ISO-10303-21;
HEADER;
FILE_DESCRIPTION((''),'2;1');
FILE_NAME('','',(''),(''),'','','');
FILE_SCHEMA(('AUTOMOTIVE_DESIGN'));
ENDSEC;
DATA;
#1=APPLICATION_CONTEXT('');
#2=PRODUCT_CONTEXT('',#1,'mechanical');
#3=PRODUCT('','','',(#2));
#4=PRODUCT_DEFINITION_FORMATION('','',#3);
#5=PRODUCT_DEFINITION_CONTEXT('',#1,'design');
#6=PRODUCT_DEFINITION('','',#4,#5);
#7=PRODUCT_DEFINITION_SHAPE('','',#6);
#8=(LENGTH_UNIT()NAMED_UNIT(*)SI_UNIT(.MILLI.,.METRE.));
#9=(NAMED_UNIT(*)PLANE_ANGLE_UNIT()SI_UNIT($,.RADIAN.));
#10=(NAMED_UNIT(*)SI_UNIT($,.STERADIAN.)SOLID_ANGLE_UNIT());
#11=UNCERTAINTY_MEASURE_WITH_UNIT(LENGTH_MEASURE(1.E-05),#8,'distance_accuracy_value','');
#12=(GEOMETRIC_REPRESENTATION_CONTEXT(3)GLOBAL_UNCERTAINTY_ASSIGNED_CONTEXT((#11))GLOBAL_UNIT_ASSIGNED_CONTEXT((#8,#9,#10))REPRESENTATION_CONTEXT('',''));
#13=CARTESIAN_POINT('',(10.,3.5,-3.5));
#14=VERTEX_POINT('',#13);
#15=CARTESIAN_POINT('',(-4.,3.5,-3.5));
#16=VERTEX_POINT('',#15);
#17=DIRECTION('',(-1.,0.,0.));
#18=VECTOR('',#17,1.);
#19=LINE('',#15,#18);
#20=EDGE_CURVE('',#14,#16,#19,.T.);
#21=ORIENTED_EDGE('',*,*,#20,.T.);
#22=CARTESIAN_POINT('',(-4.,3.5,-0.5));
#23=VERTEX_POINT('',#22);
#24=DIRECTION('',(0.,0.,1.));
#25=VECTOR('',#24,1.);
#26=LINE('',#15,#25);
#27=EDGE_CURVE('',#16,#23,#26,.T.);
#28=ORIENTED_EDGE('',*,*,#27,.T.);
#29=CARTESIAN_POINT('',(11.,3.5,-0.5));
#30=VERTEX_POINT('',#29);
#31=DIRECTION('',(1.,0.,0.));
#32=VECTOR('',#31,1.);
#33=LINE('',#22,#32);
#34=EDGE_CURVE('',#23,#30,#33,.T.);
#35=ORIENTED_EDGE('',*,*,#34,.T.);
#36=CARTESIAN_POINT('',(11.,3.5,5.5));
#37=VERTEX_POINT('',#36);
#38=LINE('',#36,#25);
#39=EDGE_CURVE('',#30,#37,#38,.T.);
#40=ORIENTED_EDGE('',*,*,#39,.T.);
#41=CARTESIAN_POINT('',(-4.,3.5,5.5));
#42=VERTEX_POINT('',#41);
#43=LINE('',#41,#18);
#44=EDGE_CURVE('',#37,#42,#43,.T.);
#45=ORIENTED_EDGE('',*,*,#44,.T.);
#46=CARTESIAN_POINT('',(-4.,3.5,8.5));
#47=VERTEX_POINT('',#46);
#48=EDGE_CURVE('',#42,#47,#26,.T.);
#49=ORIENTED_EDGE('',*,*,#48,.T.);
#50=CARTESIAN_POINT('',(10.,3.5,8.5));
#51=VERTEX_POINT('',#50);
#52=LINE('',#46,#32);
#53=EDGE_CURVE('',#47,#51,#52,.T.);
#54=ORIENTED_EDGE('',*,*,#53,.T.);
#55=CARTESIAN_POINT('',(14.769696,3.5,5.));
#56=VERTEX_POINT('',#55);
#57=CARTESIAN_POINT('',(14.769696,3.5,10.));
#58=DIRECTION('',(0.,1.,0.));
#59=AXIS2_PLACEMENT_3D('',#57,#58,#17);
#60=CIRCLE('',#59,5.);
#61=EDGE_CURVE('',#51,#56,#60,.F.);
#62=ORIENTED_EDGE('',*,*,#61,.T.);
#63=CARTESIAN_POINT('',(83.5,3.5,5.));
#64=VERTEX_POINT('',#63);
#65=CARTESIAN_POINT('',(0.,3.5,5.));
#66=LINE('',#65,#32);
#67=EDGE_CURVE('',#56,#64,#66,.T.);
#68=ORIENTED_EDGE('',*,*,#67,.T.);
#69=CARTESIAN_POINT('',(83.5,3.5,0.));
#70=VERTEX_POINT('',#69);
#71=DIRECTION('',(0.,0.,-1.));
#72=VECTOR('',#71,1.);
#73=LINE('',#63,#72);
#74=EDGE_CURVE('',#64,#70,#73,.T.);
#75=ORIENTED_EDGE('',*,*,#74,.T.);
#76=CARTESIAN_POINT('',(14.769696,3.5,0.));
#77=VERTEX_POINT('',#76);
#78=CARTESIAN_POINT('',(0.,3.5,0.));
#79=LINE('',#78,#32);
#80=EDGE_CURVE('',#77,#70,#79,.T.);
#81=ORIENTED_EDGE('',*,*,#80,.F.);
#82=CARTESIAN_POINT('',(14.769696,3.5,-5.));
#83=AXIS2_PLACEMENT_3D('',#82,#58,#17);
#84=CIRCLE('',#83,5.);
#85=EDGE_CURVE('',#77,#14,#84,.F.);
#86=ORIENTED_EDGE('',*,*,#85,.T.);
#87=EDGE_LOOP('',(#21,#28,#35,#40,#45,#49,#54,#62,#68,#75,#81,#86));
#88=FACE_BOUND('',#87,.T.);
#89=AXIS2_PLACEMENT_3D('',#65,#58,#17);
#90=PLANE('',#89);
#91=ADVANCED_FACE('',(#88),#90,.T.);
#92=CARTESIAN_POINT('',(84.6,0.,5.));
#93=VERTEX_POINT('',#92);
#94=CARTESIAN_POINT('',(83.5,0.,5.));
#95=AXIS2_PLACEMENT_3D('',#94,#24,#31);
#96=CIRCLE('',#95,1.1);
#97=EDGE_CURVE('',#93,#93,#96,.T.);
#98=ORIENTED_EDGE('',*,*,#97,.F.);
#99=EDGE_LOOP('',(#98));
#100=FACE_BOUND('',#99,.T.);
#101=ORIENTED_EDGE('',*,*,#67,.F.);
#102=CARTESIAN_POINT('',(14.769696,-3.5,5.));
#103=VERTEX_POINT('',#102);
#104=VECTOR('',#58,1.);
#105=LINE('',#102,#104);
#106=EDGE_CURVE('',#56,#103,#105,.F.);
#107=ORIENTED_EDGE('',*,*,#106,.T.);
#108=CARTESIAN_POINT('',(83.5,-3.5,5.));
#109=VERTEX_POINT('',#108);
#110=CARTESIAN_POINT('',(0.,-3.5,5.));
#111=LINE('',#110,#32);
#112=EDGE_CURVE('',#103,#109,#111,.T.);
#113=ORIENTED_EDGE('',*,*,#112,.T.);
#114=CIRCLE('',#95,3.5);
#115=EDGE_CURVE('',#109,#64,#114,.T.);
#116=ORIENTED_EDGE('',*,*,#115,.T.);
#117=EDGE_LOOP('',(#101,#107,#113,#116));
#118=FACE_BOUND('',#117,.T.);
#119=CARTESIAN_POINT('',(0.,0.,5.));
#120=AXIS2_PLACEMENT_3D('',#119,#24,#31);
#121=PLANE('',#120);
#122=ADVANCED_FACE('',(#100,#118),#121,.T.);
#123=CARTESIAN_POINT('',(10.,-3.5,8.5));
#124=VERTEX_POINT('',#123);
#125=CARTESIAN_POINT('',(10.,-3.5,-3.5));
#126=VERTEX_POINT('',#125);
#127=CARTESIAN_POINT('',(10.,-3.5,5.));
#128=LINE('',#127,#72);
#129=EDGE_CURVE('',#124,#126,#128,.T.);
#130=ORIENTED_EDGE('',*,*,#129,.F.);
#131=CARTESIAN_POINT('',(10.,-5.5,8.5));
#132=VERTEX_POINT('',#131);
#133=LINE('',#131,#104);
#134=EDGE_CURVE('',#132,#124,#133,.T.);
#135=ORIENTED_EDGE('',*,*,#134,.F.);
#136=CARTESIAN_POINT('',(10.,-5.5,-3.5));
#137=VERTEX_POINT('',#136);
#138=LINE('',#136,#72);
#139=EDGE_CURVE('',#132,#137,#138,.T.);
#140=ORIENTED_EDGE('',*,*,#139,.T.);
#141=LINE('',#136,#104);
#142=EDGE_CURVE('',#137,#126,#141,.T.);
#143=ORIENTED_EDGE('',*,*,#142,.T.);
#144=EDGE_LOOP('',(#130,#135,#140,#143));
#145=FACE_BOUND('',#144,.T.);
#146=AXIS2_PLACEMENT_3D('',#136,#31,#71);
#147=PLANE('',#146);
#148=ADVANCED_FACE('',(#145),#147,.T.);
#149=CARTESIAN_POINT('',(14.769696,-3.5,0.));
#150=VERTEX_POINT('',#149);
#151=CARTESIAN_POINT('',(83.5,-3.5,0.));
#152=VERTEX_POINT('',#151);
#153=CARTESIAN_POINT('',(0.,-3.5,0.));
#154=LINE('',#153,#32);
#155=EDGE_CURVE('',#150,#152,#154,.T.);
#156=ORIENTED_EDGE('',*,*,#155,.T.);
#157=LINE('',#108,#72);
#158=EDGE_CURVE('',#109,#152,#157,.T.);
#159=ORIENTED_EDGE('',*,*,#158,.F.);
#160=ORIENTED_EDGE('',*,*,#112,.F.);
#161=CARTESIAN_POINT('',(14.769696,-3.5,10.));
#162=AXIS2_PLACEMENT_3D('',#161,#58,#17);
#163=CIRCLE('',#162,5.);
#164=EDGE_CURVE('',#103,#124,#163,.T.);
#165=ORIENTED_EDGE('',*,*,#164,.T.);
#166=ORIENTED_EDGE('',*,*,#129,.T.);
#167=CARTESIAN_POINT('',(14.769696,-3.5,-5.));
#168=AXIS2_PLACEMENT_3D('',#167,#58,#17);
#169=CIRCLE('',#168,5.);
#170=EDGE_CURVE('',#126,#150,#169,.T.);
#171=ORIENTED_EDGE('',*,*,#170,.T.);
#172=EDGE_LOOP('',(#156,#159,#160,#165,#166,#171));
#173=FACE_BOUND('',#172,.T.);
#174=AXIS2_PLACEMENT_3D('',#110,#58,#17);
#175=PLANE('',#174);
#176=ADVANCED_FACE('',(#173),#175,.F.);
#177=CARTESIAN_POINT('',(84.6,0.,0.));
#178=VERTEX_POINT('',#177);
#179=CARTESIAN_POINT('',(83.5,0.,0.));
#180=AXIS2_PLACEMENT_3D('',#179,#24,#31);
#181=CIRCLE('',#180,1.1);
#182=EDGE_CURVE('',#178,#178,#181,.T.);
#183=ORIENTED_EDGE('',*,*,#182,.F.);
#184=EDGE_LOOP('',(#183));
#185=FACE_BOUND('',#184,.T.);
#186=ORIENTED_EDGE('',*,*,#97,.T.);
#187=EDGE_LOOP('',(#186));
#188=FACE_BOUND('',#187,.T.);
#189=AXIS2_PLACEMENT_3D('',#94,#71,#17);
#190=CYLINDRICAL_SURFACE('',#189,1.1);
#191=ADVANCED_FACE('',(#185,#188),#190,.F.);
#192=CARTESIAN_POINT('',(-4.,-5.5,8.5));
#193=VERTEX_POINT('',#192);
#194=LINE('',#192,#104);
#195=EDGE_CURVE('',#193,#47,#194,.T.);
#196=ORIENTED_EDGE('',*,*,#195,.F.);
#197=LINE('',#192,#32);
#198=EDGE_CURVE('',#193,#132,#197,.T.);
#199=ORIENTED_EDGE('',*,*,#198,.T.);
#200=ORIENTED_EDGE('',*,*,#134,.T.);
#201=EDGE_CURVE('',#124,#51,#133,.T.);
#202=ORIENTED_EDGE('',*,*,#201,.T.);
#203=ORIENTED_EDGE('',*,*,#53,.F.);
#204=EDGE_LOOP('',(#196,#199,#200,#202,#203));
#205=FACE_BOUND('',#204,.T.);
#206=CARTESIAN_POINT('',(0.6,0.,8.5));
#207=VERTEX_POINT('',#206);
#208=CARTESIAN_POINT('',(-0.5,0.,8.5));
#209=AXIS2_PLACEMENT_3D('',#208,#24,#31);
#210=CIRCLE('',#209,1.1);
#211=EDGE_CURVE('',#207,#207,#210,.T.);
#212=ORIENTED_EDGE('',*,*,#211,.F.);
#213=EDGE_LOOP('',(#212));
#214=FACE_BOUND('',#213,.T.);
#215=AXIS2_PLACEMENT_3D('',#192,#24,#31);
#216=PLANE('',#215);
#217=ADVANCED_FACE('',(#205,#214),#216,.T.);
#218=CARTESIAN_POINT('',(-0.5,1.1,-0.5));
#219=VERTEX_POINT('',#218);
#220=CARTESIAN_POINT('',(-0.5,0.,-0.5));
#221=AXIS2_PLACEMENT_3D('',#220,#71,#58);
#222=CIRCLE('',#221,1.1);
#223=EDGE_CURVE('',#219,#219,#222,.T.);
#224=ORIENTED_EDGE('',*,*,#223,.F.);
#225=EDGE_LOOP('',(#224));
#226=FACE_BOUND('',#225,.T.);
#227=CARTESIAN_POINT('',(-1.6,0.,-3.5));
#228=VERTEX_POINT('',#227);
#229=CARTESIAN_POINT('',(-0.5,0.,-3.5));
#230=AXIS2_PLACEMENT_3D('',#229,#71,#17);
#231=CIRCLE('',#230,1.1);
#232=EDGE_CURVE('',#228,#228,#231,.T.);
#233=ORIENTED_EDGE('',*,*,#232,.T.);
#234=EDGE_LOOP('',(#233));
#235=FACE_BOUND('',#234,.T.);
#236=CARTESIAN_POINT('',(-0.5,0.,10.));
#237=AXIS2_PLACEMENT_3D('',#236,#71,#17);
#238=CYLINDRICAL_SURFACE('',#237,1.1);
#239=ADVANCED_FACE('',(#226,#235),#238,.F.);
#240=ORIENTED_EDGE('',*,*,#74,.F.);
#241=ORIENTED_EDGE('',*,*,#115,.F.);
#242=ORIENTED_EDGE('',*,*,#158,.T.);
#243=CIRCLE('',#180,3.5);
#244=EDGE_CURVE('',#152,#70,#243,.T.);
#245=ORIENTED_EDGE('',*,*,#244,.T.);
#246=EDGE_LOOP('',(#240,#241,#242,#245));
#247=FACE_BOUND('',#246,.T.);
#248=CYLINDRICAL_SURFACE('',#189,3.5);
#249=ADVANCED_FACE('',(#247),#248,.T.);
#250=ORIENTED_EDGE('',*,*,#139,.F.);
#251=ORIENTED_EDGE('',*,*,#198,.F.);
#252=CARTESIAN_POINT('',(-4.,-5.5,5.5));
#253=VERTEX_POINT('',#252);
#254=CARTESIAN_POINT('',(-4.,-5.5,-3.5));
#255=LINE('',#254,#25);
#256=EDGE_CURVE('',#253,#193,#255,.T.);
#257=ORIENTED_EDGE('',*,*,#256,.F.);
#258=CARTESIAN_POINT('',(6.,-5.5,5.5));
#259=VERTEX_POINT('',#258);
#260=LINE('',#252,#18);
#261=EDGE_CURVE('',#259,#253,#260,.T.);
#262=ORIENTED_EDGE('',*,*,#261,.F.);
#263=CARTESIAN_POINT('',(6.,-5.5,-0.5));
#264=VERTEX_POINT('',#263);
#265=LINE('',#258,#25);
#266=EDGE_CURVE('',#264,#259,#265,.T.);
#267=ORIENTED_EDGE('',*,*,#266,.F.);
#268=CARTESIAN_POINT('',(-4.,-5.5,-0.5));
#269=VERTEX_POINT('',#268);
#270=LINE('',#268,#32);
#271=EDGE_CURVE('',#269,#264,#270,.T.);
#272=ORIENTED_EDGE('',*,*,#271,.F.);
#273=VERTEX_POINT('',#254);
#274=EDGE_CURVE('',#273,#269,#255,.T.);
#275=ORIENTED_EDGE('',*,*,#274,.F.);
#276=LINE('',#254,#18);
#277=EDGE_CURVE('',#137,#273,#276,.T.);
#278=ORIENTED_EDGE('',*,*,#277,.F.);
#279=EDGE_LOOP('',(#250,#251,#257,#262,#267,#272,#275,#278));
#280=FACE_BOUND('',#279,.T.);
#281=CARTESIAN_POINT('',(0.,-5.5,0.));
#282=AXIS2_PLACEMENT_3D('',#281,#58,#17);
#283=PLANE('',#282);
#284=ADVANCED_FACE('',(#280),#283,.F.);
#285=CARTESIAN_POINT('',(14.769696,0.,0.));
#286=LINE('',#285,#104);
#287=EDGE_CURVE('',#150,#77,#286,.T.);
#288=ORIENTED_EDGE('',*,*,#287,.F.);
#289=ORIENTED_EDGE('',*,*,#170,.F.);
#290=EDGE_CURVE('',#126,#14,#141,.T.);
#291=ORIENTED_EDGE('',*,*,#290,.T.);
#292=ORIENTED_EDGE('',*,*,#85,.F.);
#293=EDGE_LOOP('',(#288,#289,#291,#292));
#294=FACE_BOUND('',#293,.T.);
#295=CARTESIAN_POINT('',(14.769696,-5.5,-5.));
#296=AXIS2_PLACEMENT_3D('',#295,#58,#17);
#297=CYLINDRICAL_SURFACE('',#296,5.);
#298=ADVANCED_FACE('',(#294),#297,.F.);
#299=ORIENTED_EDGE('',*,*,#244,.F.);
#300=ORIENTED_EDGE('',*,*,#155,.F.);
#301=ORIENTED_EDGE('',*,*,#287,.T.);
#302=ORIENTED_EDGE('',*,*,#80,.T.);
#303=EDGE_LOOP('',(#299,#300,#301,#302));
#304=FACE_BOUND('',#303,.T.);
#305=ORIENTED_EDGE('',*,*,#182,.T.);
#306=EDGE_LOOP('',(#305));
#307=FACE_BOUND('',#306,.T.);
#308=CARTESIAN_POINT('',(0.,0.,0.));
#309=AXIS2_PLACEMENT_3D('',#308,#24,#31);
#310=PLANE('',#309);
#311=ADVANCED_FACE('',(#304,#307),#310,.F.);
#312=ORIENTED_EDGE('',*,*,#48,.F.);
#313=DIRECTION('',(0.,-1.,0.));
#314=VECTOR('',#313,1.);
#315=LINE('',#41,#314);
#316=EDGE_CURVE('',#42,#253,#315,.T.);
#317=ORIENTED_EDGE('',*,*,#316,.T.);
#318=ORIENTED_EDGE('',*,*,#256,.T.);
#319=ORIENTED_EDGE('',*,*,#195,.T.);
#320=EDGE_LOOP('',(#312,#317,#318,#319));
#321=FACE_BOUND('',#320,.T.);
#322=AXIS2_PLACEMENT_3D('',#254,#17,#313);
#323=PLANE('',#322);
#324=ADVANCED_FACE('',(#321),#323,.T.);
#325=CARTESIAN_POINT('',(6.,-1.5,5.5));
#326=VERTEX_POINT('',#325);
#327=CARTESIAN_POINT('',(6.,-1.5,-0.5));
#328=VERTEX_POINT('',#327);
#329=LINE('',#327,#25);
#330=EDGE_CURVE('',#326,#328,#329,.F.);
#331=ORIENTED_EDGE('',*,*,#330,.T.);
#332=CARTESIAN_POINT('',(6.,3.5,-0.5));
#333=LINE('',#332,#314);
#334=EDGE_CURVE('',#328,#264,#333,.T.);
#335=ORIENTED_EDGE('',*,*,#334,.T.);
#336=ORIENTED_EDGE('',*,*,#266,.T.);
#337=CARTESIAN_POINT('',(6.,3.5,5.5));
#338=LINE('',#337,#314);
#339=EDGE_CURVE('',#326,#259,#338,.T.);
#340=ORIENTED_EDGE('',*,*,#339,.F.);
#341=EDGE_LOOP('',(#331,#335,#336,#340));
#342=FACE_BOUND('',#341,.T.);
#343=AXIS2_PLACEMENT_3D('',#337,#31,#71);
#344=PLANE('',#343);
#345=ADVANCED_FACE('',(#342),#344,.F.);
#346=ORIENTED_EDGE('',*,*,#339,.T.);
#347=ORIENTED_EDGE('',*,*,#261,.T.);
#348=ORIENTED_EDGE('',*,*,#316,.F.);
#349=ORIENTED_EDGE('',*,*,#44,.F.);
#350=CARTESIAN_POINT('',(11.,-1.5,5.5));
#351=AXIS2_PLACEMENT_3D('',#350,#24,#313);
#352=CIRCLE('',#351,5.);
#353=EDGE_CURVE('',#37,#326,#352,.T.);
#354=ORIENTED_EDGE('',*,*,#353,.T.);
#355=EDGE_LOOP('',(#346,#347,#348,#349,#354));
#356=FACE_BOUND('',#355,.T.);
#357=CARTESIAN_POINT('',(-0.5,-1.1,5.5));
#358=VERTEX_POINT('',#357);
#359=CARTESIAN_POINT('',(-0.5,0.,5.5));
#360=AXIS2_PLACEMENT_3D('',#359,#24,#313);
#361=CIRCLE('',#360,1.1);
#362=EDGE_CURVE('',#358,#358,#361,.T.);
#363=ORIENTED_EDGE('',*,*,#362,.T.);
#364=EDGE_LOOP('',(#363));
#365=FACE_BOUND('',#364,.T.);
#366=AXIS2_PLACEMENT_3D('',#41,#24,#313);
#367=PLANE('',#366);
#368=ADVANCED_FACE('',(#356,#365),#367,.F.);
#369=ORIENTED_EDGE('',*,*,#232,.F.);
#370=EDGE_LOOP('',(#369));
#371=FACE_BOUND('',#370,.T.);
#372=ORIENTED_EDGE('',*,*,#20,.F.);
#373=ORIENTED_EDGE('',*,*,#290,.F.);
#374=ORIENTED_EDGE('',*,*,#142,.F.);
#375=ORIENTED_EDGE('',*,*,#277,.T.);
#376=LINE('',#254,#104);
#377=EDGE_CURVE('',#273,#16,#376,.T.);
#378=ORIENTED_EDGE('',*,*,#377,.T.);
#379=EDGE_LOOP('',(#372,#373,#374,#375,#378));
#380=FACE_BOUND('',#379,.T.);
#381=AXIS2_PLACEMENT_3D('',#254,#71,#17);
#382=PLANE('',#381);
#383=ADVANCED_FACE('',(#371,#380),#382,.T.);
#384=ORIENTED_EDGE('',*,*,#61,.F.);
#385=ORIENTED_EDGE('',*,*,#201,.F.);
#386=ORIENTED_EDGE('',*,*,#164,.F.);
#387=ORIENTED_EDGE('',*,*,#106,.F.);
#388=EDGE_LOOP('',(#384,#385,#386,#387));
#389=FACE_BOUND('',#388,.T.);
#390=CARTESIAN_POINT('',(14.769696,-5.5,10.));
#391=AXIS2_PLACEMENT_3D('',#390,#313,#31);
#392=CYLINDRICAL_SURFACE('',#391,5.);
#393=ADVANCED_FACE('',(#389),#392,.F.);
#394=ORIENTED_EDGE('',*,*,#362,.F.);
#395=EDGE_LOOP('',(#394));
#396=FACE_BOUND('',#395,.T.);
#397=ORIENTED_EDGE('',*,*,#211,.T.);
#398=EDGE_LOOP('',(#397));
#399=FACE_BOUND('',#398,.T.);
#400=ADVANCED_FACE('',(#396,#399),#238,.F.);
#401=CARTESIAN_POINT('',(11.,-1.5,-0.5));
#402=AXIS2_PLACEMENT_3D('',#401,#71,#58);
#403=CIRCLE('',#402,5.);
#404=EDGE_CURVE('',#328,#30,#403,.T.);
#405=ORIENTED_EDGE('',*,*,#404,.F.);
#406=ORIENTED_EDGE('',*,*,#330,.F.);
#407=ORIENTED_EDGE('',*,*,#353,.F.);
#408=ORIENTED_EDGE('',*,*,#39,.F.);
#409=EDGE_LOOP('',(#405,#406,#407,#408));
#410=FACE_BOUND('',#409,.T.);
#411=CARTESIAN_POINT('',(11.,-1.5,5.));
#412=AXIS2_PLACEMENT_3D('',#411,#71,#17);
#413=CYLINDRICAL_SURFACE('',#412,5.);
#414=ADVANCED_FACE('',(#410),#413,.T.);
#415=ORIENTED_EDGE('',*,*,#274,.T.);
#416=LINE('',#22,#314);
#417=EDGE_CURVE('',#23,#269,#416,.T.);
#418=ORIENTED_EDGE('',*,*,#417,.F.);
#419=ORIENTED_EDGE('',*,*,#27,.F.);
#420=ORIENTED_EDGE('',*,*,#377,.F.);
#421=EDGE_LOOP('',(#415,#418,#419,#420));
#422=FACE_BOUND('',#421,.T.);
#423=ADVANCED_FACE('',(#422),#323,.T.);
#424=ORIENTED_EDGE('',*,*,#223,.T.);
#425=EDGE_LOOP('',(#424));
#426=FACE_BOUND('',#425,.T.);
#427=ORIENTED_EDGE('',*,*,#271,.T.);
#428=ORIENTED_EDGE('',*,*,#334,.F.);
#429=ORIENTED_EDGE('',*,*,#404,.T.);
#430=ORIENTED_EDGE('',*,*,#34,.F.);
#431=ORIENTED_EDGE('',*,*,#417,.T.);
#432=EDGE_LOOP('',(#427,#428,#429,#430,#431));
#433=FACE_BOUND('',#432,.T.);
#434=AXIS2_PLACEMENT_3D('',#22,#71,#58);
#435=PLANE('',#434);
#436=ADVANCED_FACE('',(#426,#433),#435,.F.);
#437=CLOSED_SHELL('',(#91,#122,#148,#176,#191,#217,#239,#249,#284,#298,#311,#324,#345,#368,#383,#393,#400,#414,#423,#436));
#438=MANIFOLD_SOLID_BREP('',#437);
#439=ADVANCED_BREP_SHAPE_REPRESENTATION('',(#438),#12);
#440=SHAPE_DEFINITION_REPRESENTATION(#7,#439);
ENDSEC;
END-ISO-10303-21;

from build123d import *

# Parameters (mm, degrees)
SKETCH1_R           = 1.1
BOSS_EXTRUDE1_DEPTH = 5
SKETCH4_W           = 14
SKETCH4_H           = 12
BOSS_EXTRUDE3_DEPTH = 9
SKETCH5_W           = 10
SKETCH5_H           = 6
CUT_EXTRUDE2_DEPTH  = 9
CUT_EXTRUDE3_START  = 5
SKETCH7_R           = 1.1
CUT_EXTRUDE3_DEPTH  = 15
FILLET1_R           = 5
FILLET2_R           = 5


with BuildPart() as part:
    # Sketch1 → Boss-Extrude1 (new body)
    with BuildSketch(Plane.XY):
        with BuildLine():
            ThreePointArc((0, 3.5), (-3.5, 0), (0, -3.5))
            Line((0, -3.5), (83.5, -3.5))
            ThreePointArc((83.5, -3.5), (87, 0), (83.5, 3.5))
            Line((83.5, 3.5), (0, 3.5))
        make_face()
        Circle(SKETCH1_R, mode=Mode.SUBTRACT)
        with Locations((83.5, 0)):
            Circle(SKETCH1_R, mode=Mode.SUBTRACT)
    extrude(amount=BOSS_EXTRUDE1_DEPTH)

    # Sketch4 → Boss-Extrude3 (add)
    with BuildSketch(Plane(origin=(0, 3.5, 0), x_dir=(1, 0, 0), z_dir=(0, 1, 0))):
        with Locations((3, -2.5)):
            Rectangle(SKETCH4_W, SKETCH4_H)
    extrude(amount=-BOSS_EXTRUDE3_DEPTH)

    # Sketch5 → Cut-Extrude2 (cut)
    with BuildSketch(Plane.XZ.offset(5.5)):
        with Locations((1, 2.5)):
            Rectangle(SKETCH5_W, SKETCH5_H)
    extrude(amount=-CUT_EXTRUDE2_DEPTH, mode=Mode.SUBTRACT)

    # Sketch7 → Cut-Extrude3 (cut)
    with BuildSketch(Plane(origin=(0, 0, 0), x_dir=(-1, 0, 0), z_dir=(0, 0, -1)).offset(CUT_EXTRUDE3_START)):
        with Locations((0.5, 0)):
            Circle(SKETCH7_R)
    extrude(amount=-CUT_EXTRUDE3_DEPTH, mode=Mode.SUBTRACT)

    # Fillet1
    # the kernel refuses this fillet: 5 mm, written as the material it adds along each edge
    with BuildSketch(Plane(origin=(10, 3.5, 5), x_dir=(0, 0, 1), z_dir=(0, -1, 0))) as fillet1_piece_1:
        with BuildLine():
            CenterArc((5, -4.769696007), FILLET1_R, 107.457603124, 72.542396876)
            Line((0, -4.769696007), (-0.1, -4.769696007))
            Line((-0.1, -4.769696007), (-0.1, 0))
            Line((-0.1, 0), (0, 0.1))
            ThreePointArc((0, 0.1), (1.75, 0.1), (3.47, 0.09539392))
            Line((3.47, 0.09539392), (3.5, 0))
        make_face()
    extrude(amount=7)
    with BuildSketch(Plane(origin=(10, 3.5, 0), x_dir=(1, 0, 0), z_dir=(0, -1, 0))) as fillet1_piece_2:
        with BuildLine():
            CenterArc((4.769696007, -5), FILLET1_R, 90, 72.542396876)
            Line((0, -3.5), (-0.09539392, -3.47))
            ThreePointArc((-0.09539392, -3.47), (-0.1, -1.75), (-0.1, 0))
            Line((-0.1, 0), (0, 0.1))
            Line((0, 0.1), (4.769696007, 0.1))
            Line((4.769696007, 0.1), (4.769696007, 0))
        make_face()
    extrude(amount=7)

    # Fillet2
    fillet2_edges = [part.edges().sort_by_distance(p)[0] for p in [
        (6, 3.5, 2.5),
    ]]
    fillet(fillet2_edges, radius=FILLET2_R)


solid = part.part
